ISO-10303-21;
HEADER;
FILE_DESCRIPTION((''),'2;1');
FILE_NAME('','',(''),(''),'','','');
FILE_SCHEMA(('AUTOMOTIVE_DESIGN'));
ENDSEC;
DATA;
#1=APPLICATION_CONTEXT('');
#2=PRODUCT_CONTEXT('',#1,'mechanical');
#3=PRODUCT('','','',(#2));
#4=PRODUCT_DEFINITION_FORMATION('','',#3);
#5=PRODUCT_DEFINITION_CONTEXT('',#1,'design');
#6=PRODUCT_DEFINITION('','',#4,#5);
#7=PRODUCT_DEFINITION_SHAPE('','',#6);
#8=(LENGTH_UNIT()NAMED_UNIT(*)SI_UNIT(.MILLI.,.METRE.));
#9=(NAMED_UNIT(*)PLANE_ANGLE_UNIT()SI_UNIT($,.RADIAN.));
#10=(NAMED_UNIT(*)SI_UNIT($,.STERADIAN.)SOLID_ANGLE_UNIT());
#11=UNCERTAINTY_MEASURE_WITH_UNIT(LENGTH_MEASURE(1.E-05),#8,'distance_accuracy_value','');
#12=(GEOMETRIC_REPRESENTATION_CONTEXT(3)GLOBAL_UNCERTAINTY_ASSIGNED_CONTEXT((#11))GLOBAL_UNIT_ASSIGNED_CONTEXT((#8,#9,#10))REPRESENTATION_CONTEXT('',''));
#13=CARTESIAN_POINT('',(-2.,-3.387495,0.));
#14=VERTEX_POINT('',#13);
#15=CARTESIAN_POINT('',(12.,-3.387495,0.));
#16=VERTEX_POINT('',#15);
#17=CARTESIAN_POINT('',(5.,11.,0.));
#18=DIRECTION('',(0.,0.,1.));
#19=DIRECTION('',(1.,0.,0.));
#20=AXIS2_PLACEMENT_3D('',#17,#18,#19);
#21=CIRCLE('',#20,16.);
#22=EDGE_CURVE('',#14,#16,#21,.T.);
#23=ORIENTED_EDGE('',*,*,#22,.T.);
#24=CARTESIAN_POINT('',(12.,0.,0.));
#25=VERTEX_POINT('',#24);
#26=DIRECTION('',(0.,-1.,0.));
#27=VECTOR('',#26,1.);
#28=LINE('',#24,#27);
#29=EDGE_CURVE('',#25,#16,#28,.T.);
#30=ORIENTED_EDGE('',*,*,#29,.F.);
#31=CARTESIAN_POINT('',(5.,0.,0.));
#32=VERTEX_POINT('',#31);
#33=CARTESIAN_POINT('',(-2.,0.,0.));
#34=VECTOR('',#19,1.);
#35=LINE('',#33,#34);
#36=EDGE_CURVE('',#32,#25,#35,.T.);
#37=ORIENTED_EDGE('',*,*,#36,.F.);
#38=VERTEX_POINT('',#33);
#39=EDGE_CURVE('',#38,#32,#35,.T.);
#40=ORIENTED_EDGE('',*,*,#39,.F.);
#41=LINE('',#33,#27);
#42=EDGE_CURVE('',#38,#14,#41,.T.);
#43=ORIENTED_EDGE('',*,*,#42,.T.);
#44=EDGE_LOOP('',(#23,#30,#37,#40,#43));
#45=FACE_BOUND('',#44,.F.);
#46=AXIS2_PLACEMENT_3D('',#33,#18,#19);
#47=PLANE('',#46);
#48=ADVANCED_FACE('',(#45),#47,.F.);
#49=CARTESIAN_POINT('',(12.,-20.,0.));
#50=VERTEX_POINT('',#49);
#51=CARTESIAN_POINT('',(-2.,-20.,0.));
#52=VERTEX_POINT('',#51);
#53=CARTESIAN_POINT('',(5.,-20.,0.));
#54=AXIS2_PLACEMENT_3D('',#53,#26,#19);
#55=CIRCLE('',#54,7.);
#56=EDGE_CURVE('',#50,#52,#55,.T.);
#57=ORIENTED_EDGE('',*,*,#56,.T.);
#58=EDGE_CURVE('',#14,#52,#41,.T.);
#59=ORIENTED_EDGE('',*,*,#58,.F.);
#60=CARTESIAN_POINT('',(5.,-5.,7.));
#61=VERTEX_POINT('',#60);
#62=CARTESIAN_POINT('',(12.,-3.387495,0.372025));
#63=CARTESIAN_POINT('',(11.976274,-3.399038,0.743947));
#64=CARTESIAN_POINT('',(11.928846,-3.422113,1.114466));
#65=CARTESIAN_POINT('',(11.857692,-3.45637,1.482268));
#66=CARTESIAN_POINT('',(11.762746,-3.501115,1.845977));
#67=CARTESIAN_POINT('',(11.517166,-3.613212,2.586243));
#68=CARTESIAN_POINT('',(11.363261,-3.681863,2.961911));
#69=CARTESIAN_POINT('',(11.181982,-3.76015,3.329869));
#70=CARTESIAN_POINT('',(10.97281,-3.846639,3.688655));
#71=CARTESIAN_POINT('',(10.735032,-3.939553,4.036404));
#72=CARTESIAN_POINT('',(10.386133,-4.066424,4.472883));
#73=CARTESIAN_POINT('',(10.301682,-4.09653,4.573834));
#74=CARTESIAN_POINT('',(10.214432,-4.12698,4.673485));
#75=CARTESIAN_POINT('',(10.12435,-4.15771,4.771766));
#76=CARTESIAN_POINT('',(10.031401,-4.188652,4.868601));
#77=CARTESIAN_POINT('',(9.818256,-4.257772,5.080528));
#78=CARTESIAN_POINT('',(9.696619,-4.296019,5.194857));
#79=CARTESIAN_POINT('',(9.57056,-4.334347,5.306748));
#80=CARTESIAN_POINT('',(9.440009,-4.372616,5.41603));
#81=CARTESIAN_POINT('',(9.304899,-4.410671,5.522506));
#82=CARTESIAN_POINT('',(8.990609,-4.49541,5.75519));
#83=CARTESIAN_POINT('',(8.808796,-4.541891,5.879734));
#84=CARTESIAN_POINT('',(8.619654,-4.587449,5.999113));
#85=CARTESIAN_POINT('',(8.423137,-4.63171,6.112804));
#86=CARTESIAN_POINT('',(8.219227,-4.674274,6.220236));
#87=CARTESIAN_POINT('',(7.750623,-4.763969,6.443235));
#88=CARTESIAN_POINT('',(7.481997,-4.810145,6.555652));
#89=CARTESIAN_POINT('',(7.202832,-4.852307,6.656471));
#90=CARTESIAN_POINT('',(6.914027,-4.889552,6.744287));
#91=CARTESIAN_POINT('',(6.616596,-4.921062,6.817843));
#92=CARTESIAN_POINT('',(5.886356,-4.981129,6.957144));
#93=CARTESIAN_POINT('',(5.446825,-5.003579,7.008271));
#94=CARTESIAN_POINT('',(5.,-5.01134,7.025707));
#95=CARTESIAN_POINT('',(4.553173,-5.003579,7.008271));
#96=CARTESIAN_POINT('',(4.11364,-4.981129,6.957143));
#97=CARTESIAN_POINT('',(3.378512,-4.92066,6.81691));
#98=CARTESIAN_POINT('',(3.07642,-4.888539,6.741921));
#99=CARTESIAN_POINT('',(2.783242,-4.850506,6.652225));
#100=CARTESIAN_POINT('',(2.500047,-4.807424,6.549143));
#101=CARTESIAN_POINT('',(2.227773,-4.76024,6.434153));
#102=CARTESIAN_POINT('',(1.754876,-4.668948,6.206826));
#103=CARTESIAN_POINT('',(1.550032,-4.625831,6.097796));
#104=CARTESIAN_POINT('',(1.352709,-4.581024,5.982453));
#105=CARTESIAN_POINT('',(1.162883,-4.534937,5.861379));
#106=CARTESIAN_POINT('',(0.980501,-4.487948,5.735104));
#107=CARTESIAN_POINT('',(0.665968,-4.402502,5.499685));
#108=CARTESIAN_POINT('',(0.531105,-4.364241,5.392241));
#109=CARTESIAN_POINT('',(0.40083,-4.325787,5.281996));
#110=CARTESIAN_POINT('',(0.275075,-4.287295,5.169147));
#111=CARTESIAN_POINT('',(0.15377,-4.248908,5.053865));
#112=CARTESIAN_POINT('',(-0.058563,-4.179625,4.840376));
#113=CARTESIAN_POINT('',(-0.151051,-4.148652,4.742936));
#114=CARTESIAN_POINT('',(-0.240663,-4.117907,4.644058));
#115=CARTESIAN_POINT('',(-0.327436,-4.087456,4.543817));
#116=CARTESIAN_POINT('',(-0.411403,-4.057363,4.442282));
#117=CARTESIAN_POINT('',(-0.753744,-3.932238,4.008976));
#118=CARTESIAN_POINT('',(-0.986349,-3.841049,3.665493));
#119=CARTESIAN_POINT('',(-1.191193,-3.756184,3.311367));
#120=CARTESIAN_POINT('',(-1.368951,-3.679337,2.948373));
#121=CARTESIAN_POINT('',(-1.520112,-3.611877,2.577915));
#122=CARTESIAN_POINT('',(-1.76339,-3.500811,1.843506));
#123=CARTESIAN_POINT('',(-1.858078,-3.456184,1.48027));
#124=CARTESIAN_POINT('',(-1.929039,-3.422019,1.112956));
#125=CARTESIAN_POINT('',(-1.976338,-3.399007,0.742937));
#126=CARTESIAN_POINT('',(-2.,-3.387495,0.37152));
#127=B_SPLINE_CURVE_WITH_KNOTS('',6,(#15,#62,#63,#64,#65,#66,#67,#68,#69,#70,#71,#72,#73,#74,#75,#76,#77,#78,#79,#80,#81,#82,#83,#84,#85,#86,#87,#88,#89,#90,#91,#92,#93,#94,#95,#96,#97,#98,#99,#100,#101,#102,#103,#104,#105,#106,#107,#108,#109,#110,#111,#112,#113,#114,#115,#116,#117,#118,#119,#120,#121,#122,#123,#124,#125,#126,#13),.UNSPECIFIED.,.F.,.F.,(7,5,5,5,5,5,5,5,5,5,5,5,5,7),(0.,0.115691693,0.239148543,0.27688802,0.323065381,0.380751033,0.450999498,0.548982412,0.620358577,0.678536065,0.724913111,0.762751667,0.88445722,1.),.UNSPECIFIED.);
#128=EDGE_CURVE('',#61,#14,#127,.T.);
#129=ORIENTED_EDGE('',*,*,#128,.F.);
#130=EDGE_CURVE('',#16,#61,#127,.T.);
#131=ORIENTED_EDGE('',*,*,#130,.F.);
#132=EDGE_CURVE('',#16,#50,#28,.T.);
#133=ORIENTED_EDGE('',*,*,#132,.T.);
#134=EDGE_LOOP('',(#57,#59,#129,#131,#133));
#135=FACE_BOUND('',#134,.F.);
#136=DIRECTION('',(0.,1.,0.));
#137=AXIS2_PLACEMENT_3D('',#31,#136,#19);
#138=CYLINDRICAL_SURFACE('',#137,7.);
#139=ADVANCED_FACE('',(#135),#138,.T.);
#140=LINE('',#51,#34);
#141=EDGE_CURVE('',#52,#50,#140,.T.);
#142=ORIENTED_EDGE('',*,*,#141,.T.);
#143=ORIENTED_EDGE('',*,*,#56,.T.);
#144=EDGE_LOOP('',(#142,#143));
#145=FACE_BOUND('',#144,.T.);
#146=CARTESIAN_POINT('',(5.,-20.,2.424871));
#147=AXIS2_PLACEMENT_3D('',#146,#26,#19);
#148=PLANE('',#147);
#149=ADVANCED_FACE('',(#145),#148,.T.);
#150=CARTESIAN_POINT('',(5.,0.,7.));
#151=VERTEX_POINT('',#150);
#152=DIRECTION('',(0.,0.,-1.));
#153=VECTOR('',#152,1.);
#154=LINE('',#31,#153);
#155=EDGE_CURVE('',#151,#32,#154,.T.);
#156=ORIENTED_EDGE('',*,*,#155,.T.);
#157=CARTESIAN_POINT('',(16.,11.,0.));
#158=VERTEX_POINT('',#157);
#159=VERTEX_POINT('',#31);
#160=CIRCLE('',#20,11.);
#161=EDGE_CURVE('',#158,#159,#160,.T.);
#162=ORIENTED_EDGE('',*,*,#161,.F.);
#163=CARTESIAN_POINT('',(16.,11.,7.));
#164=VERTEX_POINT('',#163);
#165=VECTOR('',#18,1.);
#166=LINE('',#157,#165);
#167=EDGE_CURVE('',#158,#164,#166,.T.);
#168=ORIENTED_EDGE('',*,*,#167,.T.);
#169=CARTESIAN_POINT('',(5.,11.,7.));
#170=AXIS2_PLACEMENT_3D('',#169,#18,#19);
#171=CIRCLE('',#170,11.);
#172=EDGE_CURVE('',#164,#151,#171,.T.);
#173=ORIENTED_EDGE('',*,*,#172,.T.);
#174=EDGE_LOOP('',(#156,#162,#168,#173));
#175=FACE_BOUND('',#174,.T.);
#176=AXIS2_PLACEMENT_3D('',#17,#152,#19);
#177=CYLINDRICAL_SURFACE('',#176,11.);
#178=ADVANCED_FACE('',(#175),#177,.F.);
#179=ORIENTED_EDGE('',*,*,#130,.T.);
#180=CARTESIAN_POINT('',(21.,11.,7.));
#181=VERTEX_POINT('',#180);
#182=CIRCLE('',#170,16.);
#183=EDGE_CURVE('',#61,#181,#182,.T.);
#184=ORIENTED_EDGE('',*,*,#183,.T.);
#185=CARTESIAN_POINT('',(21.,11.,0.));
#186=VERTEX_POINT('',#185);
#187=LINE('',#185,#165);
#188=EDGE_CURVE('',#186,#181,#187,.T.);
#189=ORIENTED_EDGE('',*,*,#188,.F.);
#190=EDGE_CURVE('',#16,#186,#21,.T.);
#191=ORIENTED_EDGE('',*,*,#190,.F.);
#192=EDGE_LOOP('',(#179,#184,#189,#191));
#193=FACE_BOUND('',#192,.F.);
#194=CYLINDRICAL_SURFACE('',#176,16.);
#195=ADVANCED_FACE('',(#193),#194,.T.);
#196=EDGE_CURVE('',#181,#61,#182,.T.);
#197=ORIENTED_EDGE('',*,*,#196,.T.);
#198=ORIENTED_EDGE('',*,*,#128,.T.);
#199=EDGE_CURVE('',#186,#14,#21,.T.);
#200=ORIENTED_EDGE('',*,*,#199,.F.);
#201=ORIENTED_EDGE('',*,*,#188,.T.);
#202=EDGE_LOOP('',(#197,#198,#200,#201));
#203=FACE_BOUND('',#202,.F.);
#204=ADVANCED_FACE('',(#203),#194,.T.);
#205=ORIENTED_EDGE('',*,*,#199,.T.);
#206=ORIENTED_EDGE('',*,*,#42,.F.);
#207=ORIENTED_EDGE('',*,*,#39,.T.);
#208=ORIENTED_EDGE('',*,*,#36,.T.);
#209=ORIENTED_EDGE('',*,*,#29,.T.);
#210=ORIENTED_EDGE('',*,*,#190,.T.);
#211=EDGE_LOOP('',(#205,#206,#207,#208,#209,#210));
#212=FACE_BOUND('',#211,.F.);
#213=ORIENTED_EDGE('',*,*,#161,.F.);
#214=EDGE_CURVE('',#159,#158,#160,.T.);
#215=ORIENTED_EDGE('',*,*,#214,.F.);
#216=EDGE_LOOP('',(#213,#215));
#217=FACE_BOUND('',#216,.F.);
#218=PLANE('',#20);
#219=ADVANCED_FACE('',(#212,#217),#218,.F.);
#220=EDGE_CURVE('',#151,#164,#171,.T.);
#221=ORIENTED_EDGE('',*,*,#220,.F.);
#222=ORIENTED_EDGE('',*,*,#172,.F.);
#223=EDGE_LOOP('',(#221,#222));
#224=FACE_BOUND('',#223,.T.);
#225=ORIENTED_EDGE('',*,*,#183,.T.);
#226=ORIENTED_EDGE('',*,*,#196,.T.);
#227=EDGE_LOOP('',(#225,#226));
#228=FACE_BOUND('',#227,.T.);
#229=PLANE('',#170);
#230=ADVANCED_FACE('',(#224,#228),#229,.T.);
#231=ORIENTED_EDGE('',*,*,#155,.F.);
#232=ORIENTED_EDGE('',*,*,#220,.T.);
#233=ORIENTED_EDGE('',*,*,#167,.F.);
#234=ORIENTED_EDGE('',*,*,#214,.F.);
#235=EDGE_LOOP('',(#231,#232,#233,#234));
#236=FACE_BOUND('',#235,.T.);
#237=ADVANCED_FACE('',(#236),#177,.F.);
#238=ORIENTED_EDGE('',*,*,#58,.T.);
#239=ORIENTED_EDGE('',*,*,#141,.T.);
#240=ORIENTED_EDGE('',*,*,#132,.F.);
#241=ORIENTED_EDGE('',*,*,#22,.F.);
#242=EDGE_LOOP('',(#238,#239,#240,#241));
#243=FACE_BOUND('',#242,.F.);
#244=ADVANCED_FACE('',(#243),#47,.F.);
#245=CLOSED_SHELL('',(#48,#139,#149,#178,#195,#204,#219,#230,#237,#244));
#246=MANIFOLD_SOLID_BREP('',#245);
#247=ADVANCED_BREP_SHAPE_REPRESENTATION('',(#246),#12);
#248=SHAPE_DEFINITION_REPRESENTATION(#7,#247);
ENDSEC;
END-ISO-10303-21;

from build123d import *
from build123d import SkipClean  # not in build123d's __all__

# Parameters (mm, degrees)
F1_DEPTH = 20
F2_R     = 16
F2_R_2   = 11
F3_DEPTH = 7


with BuildPart() as f1:
    # F0 (on Front) → F1 (new body)
    with BuildSketch(Plane.XZ):
        with BuildLine():
            Line((-2, 0), (0, 0))
            Line((0, 0), (10, 0))
            Line((10, 0), (12, 0))
            ThreePointArc((12, 0), (5, 7), (-2, 0))
        make_face()
    extrude(amount=F1_DEPTH)

    # F2 (on Top) → F3 (join)
    with BuildSketch(Plane.XY):
        with Locations((5, 11)):
            Circle(F2_R)
        with Locations((5, 11)):
            Circle(F2_R_2, mode=Mode.SUBTRACT)
    with SkipClean():  # cleaning this boolean's faces spoils the solid; the shape is the same uncleaned
        extrude(amount=F3_DEPTH)


solid = f1.part
